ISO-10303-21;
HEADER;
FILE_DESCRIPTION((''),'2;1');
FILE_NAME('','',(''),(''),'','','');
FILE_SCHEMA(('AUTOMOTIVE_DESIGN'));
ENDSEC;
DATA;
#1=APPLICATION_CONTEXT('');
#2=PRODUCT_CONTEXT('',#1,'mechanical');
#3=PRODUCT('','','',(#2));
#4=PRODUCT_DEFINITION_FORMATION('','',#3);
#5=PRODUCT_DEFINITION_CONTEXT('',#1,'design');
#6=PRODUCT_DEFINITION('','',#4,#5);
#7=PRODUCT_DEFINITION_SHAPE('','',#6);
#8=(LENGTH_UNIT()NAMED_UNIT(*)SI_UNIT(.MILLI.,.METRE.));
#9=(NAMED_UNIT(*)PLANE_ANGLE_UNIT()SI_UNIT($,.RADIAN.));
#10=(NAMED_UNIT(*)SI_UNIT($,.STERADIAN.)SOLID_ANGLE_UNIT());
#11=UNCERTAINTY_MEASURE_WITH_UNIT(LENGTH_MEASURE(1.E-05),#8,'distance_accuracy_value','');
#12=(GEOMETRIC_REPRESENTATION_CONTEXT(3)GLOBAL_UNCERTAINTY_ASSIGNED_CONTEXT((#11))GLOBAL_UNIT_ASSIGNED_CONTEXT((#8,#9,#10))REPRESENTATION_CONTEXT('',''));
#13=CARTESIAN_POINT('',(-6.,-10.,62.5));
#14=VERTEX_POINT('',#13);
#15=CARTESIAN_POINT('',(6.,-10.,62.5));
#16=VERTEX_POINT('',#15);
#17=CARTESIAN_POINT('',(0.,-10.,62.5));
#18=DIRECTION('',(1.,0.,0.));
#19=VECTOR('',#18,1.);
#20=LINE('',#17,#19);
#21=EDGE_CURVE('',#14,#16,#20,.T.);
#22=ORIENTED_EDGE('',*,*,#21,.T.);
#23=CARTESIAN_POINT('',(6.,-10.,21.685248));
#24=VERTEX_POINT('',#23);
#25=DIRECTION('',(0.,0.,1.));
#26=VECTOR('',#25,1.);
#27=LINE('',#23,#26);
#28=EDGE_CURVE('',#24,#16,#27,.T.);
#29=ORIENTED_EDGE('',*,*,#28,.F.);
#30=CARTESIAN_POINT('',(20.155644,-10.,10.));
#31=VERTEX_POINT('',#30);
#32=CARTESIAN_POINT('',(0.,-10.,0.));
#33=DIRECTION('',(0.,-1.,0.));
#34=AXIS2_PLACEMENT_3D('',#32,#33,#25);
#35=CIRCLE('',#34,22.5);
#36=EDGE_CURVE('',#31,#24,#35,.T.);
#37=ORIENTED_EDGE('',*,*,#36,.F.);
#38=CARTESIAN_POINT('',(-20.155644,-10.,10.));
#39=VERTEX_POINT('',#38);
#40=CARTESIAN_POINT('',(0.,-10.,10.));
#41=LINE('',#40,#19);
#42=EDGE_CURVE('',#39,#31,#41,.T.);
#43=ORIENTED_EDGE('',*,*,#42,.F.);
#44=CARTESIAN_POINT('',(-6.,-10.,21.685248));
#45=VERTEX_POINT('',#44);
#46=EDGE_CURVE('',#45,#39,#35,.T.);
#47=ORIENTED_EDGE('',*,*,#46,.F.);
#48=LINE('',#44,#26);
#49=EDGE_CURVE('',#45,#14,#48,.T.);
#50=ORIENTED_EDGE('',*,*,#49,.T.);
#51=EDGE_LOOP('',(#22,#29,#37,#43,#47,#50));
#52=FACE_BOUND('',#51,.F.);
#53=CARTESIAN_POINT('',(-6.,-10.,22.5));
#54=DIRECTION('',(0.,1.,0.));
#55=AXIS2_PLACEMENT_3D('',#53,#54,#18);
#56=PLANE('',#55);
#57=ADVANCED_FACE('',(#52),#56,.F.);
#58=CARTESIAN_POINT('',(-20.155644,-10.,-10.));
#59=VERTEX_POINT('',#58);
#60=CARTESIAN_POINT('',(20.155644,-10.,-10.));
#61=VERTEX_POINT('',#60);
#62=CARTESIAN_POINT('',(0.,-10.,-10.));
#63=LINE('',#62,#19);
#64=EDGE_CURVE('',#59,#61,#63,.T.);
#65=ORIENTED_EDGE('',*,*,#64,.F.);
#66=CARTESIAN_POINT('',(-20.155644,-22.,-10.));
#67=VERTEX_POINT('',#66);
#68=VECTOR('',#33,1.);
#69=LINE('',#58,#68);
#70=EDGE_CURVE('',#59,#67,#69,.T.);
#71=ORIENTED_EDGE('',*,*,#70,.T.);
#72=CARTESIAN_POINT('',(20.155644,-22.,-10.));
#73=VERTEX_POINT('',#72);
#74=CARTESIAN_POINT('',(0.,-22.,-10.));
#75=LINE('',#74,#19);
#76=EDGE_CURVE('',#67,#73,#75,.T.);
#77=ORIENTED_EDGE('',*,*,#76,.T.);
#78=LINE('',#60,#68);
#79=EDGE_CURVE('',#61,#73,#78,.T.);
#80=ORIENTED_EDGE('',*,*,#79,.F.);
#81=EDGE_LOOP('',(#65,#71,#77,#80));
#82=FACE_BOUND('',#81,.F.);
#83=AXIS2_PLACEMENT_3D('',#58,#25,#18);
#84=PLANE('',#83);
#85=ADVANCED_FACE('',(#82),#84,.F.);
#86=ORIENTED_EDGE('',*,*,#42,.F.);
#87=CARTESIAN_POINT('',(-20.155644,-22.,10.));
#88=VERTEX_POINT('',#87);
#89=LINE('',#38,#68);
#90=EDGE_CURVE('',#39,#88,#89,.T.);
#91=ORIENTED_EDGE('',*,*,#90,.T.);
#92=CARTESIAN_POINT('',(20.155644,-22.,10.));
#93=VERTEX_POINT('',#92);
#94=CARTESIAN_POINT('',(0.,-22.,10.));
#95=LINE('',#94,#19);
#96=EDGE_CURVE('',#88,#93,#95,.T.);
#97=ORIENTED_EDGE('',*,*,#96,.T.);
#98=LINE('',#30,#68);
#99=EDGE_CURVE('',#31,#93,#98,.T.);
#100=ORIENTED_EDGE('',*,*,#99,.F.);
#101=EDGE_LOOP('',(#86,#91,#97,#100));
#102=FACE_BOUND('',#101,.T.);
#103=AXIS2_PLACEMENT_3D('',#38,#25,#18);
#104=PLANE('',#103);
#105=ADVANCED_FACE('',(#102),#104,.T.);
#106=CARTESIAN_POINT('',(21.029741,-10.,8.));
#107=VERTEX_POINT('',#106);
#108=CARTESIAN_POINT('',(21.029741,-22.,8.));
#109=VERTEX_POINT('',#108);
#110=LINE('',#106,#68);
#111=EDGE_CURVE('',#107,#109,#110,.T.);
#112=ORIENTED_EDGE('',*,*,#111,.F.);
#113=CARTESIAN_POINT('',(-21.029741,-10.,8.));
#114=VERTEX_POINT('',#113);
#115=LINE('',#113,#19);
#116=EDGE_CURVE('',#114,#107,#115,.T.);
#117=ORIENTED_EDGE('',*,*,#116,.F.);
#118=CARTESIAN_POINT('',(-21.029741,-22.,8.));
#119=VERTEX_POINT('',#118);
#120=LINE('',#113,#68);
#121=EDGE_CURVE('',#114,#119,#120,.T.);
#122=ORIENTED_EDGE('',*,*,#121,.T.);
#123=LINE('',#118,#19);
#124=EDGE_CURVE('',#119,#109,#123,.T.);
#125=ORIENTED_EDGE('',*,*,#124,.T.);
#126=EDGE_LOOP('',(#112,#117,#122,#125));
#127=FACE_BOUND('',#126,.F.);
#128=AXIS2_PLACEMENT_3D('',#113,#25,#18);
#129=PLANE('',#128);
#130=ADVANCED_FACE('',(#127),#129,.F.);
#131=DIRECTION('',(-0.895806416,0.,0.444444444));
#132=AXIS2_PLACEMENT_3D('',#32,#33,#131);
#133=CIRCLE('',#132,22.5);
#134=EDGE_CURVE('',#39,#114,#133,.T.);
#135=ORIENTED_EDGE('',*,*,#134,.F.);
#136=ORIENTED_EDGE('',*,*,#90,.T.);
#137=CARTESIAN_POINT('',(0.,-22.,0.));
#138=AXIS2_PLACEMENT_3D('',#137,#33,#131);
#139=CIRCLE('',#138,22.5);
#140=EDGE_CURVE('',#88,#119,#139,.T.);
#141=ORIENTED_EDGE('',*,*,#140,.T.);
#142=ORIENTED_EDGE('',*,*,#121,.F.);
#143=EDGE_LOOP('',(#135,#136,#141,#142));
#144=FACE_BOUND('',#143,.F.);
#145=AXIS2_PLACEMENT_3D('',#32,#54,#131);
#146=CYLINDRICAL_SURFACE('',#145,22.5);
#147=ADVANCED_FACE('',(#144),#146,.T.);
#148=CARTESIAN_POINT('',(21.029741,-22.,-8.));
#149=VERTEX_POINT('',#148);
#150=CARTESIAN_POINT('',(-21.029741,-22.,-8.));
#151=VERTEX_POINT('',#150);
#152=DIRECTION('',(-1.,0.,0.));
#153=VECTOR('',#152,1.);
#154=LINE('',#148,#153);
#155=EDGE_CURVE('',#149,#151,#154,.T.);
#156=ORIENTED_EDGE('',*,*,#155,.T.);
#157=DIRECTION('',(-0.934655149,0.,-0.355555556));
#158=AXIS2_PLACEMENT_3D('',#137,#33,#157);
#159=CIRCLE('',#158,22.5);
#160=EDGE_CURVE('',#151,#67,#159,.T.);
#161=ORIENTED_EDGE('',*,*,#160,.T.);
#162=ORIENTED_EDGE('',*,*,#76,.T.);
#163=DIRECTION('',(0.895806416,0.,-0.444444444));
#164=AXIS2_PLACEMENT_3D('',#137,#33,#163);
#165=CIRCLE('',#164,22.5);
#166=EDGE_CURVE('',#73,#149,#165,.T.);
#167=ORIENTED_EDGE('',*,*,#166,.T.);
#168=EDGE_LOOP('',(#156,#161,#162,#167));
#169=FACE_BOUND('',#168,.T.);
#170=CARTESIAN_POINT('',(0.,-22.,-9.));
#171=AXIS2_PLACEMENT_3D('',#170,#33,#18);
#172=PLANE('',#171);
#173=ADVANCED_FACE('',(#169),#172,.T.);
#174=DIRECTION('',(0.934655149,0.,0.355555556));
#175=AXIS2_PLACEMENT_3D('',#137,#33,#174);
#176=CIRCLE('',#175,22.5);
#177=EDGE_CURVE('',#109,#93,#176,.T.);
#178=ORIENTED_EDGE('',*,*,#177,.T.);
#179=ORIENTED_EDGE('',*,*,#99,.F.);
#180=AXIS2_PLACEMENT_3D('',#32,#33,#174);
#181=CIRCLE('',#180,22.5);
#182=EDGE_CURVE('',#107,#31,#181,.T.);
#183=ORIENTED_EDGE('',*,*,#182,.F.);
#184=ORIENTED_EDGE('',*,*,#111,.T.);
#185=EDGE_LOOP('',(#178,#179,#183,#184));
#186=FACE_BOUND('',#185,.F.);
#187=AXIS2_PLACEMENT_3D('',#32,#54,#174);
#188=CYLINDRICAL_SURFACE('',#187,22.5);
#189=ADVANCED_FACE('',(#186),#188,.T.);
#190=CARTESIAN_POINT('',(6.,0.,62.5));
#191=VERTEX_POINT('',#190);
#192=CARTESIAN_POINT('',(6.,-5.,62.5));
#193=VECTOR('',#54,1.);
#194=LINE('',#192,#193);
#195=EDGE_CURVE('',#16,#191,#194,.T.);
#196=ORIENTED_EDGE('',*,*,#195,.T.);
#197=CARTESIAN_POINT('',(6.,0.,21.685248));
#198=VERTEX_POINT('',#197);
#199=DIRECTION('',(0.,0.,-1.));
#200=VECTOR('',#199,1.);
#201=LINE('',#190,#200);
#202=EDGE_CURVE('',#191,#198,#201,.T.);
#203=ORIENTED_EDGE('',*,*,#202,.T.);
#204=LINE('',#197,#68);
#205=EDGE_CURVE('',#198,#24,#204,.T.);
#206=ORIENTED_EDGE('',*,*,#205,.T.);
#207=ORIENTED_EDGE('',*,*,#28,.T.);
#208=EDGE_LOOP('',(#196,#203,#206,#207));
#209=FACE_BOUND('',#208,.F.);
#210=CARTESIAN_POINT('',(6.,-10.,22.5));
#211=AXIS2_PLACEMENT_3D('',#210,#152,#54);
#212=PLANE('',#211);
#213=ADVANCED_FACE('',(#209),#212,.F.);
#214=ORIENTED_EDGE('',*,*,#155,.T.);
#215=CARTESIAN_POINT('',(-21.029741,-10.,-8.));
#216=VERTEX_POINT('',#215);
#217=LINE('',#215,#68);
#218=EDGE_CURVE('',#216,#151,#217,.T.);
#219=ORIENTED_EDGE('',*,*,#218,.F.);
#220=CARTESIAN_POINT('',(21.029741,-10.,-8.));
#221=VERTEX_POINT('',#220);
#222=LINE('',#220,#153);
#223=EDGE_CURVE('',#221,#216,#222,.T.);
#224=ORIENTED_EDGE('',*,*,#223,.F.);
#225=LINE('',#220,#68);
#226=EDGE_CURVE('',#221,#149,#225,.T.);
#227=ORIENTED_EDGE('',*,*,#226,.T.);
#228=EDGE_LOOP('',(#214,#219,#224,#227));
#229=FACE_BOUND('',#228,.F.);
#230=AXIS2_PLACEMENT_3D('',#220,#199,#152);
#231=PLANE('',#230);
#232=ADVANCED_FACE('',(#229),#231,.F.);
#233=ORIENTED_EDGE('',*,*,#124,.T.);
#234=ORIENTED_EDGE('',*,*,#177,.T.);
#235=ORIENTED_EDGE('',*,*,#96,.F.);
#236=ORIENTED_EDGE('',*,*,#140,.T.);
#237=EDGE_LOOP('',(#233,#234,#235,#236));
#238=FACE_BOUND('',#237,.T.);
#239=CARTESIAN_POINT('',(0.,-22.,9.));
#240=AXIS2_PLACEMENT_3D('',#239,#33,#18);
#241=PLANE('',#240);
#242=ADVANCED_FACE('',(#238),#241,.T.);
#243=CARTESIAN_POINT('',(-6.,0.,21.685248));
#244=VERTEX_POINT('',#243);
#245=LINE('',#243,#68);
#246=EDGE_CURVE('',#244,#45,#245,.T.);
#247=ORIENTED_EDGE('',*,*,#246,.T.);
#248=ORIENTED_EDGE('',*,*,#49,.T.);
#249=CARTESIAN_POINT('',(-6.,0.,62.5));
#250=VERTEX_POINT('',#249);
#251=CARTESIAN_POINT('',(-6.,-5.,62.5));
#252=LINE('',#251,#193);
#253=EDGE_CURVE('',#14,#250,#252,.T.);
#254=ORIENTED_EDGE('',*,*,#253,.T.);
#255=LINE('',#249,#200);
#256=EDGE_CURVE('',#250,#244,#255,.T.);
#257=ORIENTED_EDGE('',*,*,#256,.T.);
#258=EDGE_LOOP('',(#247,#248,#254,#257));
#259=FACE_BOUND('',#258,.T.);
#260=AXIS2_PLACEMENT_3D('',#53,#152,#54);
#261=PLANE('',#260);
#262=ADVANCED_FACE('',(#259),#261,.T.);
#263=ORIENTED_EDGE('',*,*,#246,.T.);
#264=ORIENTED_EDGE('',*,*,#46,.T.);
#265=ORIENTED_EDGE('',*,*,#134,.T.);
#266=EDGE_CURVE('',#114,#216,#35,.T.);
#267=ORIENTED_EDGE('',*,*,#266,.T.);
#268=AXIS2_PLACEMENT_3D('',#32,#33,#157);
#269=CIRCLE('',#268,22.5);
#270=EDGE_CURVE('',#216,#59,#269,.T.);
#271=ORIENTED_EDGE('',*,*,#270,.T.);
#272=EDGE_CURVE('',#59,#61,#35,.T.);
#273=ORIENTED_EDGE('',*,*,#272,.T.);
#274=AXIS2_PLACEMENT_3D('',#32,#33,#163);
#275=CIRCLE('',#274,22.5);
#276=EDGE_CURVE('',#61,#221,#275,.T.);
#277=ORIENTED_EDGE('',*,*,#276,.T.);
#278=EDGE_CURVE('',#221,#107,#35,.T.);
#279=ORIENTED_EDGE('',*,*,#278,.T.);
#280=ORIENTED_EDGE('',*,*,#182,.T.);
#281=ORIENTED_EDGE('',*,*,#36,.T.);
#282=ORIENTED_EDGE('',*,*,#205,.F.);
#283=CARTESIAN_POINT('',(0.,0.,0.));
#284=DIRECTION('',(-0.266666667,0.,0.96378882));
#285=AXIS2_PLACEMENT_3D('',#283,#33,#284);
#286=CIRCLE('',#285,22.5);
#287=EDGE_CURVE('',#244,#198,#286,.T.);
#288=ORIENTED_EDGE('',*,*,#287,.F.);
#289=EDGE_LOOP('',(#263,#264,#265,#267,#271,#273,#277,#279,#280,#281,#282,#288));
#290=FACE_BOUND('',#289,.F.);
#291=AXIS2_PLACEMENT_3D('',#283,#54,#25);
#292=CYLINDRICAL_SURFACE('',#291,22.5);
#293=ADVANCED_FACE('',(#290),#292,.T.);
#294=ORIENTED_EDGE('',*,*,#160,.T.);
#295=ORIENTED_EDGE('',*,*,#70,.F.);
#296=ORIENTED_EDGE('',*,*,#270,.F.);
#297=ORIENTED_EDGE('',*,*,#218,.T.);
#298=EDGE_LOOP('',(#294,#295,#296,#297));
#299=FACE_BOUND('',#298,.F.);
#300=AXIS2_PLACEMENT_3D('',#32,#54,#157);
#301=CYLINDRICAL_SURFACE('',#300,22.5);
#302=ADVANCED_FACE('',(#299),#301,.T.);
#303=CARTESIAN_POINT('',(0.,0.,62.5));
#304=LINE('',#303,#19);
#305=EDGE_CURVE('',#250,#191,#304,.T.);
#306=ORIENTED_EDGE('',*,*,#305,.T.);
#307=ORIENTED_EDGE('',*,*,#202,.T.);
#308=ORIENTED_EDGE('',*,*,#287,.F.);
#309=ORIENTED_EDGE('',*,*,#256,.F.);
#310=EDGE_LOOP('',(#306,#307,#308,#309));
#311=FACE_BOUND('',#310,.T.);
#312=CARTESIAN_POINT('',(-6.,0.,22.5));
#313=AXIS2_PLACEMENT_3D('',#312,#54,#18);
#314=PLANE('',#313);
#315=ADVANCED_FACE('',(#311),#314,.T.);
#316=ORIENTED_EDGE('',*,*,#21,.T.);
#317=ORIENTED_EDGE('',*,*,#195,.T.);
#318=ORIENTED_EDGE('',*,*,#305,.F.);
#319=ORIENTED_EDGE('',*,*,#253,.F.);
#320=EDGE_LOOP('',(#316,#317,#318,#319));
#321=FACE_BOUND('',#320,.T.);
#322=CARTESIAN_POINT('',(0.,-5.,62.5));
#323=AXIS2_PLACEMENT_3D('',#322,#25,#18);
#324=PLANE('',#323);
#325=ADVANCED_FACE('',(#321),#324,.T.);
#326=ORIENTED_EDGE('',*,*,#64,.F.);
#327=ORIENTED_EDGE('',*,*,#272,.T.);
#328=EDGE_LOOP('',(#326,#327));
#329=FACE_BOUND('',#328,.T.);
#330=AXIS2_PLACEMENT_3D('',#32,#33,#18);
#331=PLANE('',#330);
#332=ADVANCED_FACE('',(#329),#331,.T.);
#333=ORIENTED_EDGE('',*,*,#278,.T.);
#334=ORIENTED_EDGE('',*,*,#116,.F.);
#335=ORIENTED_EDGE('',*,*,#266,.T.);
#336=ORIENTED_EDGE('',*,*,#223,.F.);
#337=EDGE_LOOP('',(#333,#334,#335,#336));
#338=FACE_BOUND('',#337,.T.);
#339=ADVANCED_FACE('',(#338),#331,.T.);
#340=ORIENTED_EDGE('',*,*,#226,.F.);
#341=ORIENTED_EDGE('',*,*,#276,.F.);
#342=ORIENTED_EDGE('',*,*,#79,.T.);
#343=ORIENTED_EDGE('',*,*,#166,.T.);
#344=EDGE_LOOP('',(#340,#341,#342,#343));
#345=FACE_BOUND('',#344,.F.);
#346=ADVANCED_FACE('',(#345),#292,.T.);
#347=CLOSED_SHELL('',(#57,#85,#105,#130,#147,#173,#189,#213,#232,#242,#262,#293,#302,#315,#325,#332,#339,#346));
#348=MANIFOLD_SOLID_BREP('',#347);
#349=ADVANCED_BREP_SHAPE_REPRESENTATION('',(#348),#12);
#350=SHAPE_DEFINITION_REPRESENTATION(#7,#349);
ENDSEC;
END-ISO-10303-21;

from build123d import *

# Parameters (mm, degrees)
F1_DEPTH  = 10
F2_W      = 40.3112887415
F2_H      = 2
F3_DEPTH  = 12
F6_DEPTH  = 10
F7_W      = 12
F7_H      = 10
F8_DEPTH  = 40
F9_W      = 59.6965367126
F9_H      = 7.6070292853
F10_DEPTH = 25


# Not quite as in the source:
# - a feature of the source that left no trace in its solid (it failed there, or was rolled back) is left out


with BuildPart() as f1:
    # F0 (on Front) → F1 (new body)
    with BuildSketch(Plane.XZ):
        with BuildLine():
            ThreePointArc((-6, 21.6852484422), (-13.6244265934, -17.9060045795), (22.5, 0))
            ThreePointArc((22.5, 0), (17.9060045795, 13.6244265934), (6, 21.6852484422))
            ThreePointArc((6, 21.6852484422), (3.0275328281, 22.2953816961), (0, 22.5))
            ThreePointArc((0, 22.5), (-3.0275328281, 22.2953816961), (-6, 21.6852484422))
        make_face()
    extrude(amount=F1_DEPTH)

    # F2 (on face) → F3 (join)
    with BuildSketch(Plane.XZ.offset(10)):
        with Locations((0, 9)):
            Rectangle(F2_W, F2_H)
        with Locations((0, -9)):
            Rectangle(F2_W, F2_H)
        with BuildLine():
            Line((20.1556443707, 10), (20.1556443707, 8))
            Line((20.1556443707, 8), (21.0297408448, 8))
            ThreePointArc((21.0297408448, 8), (20.6169587679, 9.0106054825), (20.1556443707, 10))
        make_face()
        with BuildLine():
            ThreePointArc((-20.1556443707, 10), (-20.6169587679, 9.0106054825), (-21.0297408448, 8))
            Line((-21.0297408448, 8), (-20.1556443707, 8))
            Line((-20.1556443707, 8), (-20.1556443707, 10))
        make_face()
        with BuildLine():
            Line((-20.1556443707, -8), (-21.0297408448, -8))
            ThreePointArc((-21.0297408448, -8), (-20.6169587679, -9.0106054825), (-20.1556443707, -10))
            Line((-20.1556443707, -10), (-20.1556443707, -8))
        make_face()
        with BuildLine():
            Line((21.0297408448, -8), (20.1556443707, -8))
            Line((20.1556443707, -8), (20.1556443707, -10))
            ThreePointArc((20.1556443707, -10), (20.6169587679, -9.0106054825), (21.0297408448, -8))
        make_face()
    extrude(amount=F3_DEPTH)

    # F0 (on Front) → F6 (join)
    with BuildSketch(Plane.XZ):
        with BuildLine():
            ThreePointArc((-6, 21.6852484422), (-13.6244265934, -17.9060045795), (22.5, 0))
            ThreePointArc((22.5, 0), (17.9060045795, 13.6244265934), (6, 21.6852484422))
            ThreePointArc((6, 21.6852484422), (3.0275328281, 22.2953816961), (0, 22.5))
            ThreePointArc((0, 22.5), (-3.0275328281, 22.2953816961), (-6, 21.6852484422))
        make_face()
        with BuildLine():
            ThreePointArc((0, 22.5), (3.0275328281, 22.2953816961), (6, 21.6852484422))
            Line((6, 21.6852484422), (6, 22.5))
            Line((6, 22.5), (0, 22.5))
        make_face()
        with BuildLine():
            Line((-6, 22.5), (-6, 21.6852484422))
            ThreePointArc((-6, 21.6852484422), (-3.0275328281, 22.2953816961), (0, 22.5))
            Line((0, 22.5), (-6, 22.5))
        make_face()
    extrude(amount=F6_DEPTH)

    # F7 (on face) → F8 (join)
    with BuildSketch(Plane.XY.offset(22.5)):
        with Locations((0, -5)):
            Rectangle(F7_W, F7_H)
    extrude(amount=F8_DEPTH)

    # F9 (on face) → F10 (cut)
    with BuildSketch(Plane.XY.offset(6)):
        with Locations((-0.8811633027, 3.8035146426)):
            Rectangle(F9_W, F9_H)
    extrude(amount=-F10_DEPTH, mode=Mode.SUBTRACT)


solid = f1.part
